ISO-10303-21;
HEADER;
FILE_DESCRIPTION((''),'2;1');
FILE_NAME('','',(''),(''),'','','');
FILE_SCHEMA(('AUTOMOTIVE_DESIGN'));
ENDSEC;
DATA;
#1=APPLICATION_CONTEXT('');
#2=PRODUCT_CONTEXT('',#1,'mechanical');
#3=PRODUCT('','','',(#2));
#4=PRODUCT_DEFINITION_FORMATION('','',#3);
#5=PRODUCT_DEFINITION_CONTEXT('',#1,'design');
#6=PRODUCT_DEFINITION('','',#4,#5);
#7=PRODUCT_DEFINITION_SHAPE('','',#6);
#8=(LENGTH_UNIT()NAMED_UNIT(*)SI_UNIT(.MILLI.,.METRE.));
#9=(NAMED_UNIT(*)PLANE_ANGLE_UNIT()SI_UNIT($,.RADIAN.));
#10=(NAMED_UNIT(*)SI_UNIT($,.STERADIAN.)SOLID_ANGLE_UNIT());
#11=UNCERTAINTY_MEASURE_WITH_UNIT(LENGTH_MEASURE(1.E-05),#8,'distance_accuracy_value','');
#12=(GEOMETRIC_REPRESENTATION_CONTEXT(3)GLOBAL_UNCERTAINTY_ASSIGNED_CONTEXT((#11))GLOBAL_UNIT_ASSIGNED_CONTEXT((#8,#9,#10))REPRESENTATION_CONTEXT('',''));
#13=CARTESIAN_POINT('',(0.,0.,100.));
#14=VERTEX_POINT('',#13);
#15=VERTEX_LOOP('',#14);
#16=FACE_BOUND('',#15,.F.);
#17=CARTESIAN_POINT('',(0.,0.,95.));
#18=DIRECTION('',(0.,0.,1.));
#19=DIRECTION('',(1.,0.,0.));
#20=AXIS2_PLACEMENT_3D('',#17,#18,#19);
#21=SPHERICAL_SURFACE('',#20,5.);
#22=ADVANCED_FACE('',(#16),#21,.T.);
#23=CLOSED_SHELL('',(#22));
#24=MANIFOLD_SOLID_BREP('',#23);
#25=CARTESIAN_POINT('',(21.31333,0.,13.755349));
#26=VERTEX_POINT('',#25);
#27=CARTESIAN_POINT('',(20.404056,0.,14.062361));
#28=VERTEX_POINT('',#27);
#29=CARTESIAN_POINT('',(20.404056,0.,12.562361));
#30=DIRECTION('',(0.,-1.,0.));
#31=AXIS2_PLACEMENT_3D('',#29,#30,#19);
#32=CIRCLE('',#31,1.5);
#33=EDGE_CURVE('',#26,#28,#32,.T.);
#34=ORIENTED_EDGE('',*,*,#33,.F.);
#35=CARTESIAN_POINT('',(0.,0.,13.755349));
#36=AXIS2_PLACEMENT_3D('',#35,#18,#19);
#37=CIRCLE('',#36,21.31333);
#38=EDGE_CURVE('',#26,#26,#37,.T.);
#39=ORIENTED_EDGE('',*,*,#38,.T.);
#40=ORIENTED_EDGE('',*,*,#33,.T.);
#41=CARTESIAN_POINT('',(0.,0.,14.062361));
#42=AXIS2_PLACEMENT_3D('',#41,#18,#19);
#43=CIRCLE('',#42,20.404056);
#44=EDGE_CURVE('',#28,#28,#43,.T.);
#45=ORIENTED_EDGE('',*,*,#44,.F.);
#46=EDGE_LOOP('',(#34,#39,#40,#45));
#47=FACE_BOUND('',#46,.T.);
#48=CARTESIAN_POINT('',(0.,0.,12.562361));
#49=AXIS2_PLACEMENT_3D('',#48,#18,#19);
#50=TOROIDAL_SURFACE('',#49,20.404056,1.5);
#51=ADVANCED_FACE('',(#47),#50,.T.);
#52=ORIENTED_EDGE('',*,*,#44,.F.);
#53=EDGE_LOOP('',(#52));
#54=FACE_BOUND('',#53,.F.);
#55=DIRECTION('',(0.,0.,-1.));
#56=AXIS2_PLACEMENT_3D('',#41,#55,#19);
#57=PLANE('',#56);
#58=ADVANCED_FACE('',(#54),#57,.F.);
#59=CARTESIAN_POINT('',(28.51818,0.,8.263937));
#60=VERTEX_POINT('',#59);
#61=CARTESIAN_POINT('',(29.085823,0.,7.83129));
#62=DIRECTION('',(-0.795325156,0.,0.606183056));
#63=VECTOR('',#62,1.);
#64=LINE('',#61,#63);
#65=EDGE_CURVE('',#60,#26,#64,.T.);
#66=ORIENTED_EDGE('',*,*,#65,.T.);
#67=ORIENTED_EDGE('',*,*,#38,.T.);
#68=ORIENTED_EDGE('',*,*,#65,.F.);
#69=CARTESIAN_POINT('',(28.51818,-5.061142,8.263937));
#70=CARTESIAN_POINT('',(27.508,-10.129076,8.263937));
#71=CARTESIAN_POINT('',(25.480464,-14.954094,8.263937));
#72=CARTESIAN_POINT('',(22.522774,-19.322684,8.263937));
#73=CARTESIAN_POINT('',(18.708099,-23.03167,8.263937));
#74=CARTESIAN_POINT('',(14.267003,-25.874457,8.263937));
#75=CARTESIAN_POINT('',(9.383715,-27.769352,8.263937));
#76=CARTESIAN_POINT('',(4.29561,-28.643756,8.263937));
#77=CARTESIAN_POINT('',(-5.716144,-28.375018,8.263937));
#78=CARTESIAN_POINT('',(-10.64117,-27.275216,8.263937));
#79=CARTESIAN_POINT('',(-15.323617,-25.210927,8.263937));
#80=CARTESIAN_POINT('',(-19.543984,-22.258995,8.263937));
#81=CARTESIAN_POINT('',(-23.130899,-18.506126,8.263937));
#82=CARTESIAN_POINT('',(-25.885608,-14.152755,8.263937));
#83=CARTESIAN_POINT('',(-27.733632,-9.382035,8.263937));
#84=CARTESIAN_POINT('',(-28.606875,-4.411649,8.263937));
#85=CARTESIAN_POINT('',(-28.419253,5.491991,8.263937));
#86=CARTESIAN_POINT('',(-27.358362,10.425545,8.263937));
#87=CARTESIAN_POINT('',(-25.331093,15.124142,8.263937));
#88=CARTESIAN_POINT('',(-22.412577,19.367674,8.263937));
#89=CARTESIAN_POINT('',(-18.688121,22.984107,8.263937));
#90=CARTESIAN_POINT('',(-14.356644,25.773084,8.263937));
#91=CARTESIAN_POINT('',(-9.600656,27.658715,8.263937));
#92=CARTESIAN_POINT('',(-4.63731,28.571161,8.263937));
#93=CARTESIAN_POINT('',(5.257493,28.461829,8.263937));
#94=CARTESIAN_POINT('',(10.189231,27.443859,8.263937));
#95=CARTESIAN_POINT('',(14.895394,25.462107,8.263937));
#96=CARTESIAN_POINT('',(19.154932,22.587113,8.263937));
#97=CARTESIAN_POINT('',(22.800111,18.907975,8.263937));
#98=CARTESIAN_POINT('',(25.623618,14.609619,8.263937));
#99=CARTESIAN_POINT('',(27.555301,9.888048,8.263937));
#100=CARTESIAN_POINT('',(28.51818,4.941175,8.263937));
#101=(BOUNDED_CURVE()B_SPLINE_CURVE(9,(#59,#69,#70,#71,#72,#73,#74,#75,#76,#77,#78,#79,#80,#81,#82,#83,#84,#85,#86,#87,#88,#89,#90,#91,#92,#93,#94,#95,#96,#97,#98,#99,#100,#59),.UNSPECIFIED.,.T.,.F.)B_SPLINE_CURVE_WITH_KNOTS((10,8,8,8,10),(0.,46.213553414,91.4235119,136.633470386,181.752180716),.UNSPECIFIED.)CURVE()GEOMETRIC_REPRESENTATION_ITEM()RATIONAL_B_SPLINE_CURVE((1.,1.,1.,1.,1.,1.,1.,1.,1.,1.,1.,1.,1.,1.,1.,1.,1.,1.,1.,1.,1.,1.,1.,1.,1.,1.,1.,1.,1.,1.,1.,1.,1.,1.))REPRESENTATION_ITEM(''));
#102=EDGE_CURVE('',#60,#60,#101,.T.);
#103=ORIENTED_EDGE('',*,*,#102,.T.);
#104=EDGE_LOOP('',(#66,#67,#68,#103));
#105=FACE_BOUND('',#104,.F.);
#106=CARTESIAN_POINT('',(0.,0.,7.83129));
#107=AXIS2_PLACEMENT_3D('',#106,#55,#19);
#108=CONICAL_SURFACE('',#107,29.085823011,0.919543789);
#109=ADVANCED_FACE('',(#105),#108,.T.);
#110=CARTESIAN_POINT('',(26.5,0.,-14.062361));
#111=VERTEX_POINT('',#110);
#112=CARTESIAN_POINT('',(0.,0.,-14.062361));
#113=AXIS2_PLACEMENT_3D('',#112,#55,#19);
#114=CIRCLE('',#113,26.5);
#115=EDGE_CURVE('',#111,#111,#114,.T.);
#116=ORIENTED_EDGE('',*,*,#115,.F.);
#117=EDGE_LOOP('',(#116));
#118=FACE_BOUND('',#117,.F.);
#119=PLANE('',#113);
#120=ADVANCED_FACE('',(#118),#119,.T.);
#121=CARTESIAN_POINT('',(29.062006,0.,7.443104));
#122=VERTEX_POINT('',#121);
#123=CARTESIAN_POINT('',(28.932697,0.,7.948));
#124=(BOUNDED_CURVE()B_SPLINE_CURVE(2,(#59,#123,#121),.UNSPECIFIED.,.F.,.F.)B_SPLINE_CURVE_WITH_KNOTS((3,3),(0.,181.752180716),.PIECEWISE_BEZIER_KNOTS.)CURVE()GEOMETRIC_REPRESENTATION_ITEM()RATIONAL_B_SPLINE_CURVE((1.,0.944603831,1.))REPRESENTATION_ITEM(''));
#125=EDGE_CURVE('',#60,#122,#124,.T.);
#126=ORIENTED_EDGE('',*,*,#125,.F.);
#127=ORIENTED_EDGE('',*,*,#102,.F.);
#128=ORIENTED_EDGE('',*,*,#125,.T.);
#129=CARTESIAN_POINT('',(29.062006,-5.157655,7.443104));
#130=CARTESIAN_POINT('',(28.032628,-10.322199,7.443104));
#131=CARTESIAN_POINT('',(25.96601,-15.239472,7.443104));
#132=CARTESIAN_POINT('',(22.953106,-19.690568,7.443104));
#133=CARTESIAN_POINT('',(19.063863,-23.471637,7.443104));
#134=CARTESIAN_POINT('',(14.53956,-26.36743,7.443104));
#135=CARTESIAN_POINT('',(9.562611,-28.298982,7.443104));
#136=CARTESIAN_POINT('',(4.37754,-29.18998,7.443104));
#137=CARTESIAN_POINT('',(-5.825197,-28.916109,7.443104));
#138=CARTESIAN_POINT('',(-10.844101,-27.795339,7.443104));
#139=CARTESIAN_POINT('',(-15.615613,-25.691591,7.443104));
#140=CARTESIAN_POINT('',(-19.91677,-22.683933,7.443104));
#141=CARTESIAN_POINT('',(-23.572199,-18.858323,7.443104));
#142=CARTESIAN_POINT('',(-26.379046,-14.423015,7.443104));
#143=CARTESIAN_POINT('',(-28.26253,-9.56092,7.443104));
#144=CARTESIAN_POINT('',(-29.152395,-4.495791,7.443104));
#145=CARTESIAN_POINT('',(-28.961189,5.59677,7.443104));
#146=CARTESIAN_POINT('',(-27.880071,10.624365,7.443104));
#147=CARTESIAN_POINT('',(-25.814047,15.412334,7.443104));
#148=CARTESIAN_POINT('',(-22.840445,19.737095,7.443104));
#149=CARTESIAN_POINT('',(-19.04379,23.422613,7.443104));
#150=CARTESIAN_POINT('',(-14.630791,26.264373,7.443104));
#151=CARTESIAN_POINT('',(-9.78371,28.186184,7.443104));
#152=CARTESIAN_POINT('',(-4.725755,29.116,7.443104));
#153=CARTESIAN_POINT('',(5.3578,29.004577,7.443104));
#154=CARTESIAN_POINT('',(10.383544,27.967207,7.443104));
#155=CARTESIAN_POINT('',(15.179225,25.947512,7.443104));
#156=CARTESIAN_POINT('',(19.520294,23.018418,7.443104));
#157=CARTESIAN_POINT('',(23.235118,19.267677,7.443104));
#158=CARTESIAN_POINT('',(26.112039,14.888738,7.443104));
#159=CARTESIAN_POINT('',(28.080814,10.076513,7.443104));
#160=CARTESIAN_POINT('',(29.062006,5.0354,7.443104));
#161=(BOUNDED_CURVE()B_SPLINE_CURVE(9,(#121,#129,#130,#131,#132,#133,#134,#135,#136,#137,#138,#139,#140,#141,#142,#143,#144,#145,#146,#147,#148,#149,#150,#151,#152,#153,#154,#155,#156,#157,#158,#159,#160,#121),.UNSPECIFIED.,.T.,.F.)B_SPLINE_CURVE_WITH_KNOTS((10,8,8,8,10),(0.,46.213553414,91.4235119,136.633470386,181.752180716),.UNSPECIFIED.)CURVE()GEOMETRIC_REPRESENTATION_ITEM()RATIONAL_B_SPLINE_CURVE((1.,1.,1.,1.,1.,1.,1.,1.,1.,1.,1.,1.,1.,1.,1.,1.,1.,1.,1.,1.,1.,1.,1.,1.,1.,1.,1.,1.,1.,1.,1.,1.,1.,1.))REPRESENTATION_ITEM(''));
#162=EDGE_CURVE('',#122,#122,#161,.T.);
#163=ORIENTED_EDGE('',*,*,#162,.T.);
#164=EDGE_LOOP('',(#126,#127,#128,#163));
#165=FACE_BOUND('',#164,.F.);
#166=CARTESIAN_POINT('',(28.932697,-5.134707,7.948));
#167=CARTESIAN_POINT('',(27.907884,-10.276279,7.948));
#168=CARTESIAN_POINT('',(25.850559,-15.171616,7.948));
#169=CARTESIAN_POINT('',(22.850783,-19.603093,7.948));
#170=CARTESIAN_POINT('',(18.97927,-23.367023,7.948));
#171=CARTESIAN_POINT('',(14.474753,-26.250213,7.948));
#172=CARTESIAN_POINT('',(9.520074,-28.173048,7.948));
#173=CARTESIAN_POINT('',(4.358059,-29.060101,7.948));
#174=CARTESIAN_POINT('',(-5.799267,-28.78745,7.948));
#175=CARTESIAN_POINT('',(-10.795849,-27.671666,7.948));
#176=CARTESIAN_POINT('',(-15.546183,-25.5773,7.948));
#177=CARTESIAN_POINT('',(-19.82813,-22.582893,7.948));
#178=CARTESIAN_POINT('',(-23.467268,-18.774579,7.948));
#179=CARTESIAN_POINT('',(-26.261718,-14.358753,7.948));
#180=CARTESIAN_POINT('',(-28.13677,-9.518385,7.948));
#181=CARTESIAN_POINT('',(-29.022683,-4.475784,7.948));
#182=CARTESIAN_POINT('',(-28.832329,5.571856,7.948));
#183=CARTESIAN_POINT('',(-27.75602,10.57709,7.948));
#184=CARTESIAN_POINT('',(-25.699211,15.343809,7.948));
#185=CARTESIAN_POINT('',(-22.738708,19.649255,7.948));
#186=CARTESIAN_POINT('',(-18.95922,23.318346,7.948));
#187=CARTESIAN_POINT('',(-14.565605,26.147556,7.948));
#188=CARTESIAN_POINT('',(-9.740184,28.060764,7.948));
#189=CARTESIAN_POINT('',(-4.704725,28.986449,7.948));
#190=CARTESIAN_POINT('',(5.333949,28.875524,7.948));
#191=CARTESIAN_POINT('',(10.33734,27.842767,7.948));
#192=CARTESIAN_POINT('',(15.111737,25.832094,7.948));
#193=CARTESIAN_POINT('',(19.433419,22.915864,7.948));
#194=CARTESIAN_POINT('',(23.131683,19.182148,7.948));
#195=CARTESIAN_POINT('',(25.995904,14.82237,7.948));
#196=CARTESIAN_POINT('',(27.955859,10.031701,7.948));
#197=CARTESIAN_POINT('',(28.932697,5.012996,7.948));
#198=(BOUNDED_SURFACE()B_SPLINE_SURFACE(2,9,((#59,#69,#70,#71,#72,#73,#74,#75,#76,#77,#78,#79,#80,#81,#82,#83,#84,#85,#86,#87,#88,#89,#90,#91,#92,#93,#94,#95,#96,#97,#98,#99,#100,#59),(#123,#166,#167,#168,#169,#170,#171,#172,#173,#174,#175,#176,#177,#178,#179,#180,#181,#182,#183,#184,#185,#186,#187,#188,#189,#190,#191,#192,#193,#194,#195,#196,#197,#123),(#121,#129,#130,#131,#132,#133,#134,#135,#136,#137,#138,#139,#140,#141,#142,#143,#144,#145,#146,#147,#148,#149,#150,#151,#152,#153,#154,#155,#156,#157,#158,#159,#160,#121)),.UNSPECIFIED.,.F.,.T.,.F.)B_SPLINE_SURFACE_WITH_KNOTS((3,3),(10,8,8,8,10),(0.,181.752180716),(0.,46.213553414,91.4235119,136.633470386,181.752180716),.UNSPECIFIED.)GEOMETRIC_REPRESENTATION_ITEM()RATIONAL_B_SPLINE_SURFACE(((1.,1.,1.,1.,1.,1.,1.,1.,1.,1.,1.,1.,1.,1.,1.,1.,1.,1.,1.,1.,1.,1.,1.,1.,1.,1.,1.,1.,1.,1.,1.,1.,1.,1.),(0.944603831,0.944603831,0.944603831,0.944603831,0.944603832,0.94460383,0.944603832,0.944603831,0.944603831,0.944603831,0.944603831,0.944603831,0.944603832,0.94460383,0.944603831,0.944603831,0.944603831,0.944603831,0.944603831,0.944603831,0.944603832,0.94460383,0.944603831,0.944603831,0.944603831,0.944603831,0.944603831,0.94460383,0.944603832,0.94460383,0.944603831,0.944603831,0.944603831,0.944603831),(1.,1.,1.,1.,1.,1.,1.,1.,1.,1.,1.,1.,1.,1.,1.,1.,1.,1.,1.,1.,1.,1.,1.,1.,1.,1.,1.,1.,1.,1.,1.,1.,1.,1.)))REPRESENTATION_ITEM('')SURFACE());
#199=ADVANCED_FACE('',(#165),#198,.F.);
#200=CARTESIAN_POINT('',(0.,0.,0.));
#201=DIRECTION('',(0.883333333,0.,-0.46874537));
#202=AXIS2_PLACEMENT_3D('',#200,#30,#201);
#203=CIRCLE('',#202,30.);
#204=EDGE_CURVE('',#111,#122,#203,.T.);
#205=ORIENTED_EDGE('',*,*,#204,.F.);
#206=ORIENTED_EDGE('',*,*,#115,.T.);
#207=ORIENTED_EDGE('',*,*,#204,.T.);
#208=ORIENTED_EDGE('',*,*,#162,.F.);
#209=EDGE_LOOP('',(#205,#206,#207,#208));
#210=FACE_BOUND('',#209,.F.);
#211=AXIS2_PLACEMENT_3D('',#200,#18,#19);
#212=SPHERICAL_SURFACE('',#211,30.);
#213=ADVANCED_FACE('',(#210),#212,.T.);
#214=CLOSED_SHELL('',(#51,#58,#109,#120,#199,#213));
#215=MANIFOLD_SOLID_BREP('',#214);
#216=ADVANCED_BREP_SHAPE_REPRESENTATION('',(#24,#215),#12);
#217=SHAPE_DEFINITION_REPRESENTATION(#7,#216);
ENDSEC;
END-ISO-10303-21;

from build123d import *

# Parameters (mm, degrees)
F4_R = 1.5
F5_R = 1.5


# Not quite as in the source:
# - a fillet or chamfer that OpenCascade refuses, or shapes differently, is made with other operations: its cross-section is extruded or revolved along the edge and cut away or added
# - the program builds the solid bodies; features that only make, move or delete a surface that nothing else refers to are left out


with BuildPart() as f2:
    # F0 (on Front) → F2 (revolve)
    with BuildSketch(Plane.XZ):
        with BuildLine():
            Line((0, 14.0623611104), (0, -14.0623611104))
            Line((0, -14.0623611104), (26.5, -14.0623611104))
            ThreePointArc((26.5, -14.0623611104), (30, 0), (26.5, 14.0623611104))
            Line((26.5, 14.0623611104), (0, 14.0623611104))
        make_face()
    revolve(axis=Axis((0, 0, -0.4438906908), (0, 0, -1)))

    # F3: chamfer of 5 on 1 edges, made by hand

    # F3_s1 → F3_t2 (revolve, cut)
    with BuildSketch(Plane.XZ):
        with BuildLine():
            Line((29.0858230111, 7.8312895768), (20.7514586352, 14.1835977215))
            Line((20.7514586352, 14.1835977215), (20.7514586352, 14.2835977215))
            ThreePointArc((20.7514586352, 14.2835977215), (23.6257293176, 14.1623611104), (26.5, 14.1623611104))
            Line((26.5, 14.1623611104), (26.5883333333, 14.1092356475))
            ThreePointArc((26.5883333333, 14.1092356475), (28.005944571, 11.0307329169), (29.1822455377, 7.8577979974))
            Line((29.1822455377, 7.8577979974), (29.0858230111, 7.8312895768))
        make_face()
    revolve(axis=Axis((0, 0, 14.0623611104), (0, 0, -1)), mode=Mode.SUBTRACT)

    # F4
    f4_edges = [f2.edges().sort_by_distance(p)[0] for p in [
        (-20.910524, 0, 14.062361),
    ]]
    fillet(f4_edges, radius=F4_R)

    # F5
    f5_edges = [f2.edges().sort_by_distance(p)[0] for p in [
        (-28.926758, 0, 7.952526),
    ]]
    fillet(f5_edges, radius=F5_R)


with BuildPart() as f7:
    # F0 (on Front) → F7 (revolve)
    with BuildSketch(Plane.XZ):
        with BuildLine():
            ThreePointArc((0, 90), (5, 95), (0, 100))
            Line((0, 100), (0, 90))
        make_face()
    revolve(axis=Axis((0, 0, -0.4438906908), (0, 0, -1)))


solid = Compound([f2.part, f7.part])
